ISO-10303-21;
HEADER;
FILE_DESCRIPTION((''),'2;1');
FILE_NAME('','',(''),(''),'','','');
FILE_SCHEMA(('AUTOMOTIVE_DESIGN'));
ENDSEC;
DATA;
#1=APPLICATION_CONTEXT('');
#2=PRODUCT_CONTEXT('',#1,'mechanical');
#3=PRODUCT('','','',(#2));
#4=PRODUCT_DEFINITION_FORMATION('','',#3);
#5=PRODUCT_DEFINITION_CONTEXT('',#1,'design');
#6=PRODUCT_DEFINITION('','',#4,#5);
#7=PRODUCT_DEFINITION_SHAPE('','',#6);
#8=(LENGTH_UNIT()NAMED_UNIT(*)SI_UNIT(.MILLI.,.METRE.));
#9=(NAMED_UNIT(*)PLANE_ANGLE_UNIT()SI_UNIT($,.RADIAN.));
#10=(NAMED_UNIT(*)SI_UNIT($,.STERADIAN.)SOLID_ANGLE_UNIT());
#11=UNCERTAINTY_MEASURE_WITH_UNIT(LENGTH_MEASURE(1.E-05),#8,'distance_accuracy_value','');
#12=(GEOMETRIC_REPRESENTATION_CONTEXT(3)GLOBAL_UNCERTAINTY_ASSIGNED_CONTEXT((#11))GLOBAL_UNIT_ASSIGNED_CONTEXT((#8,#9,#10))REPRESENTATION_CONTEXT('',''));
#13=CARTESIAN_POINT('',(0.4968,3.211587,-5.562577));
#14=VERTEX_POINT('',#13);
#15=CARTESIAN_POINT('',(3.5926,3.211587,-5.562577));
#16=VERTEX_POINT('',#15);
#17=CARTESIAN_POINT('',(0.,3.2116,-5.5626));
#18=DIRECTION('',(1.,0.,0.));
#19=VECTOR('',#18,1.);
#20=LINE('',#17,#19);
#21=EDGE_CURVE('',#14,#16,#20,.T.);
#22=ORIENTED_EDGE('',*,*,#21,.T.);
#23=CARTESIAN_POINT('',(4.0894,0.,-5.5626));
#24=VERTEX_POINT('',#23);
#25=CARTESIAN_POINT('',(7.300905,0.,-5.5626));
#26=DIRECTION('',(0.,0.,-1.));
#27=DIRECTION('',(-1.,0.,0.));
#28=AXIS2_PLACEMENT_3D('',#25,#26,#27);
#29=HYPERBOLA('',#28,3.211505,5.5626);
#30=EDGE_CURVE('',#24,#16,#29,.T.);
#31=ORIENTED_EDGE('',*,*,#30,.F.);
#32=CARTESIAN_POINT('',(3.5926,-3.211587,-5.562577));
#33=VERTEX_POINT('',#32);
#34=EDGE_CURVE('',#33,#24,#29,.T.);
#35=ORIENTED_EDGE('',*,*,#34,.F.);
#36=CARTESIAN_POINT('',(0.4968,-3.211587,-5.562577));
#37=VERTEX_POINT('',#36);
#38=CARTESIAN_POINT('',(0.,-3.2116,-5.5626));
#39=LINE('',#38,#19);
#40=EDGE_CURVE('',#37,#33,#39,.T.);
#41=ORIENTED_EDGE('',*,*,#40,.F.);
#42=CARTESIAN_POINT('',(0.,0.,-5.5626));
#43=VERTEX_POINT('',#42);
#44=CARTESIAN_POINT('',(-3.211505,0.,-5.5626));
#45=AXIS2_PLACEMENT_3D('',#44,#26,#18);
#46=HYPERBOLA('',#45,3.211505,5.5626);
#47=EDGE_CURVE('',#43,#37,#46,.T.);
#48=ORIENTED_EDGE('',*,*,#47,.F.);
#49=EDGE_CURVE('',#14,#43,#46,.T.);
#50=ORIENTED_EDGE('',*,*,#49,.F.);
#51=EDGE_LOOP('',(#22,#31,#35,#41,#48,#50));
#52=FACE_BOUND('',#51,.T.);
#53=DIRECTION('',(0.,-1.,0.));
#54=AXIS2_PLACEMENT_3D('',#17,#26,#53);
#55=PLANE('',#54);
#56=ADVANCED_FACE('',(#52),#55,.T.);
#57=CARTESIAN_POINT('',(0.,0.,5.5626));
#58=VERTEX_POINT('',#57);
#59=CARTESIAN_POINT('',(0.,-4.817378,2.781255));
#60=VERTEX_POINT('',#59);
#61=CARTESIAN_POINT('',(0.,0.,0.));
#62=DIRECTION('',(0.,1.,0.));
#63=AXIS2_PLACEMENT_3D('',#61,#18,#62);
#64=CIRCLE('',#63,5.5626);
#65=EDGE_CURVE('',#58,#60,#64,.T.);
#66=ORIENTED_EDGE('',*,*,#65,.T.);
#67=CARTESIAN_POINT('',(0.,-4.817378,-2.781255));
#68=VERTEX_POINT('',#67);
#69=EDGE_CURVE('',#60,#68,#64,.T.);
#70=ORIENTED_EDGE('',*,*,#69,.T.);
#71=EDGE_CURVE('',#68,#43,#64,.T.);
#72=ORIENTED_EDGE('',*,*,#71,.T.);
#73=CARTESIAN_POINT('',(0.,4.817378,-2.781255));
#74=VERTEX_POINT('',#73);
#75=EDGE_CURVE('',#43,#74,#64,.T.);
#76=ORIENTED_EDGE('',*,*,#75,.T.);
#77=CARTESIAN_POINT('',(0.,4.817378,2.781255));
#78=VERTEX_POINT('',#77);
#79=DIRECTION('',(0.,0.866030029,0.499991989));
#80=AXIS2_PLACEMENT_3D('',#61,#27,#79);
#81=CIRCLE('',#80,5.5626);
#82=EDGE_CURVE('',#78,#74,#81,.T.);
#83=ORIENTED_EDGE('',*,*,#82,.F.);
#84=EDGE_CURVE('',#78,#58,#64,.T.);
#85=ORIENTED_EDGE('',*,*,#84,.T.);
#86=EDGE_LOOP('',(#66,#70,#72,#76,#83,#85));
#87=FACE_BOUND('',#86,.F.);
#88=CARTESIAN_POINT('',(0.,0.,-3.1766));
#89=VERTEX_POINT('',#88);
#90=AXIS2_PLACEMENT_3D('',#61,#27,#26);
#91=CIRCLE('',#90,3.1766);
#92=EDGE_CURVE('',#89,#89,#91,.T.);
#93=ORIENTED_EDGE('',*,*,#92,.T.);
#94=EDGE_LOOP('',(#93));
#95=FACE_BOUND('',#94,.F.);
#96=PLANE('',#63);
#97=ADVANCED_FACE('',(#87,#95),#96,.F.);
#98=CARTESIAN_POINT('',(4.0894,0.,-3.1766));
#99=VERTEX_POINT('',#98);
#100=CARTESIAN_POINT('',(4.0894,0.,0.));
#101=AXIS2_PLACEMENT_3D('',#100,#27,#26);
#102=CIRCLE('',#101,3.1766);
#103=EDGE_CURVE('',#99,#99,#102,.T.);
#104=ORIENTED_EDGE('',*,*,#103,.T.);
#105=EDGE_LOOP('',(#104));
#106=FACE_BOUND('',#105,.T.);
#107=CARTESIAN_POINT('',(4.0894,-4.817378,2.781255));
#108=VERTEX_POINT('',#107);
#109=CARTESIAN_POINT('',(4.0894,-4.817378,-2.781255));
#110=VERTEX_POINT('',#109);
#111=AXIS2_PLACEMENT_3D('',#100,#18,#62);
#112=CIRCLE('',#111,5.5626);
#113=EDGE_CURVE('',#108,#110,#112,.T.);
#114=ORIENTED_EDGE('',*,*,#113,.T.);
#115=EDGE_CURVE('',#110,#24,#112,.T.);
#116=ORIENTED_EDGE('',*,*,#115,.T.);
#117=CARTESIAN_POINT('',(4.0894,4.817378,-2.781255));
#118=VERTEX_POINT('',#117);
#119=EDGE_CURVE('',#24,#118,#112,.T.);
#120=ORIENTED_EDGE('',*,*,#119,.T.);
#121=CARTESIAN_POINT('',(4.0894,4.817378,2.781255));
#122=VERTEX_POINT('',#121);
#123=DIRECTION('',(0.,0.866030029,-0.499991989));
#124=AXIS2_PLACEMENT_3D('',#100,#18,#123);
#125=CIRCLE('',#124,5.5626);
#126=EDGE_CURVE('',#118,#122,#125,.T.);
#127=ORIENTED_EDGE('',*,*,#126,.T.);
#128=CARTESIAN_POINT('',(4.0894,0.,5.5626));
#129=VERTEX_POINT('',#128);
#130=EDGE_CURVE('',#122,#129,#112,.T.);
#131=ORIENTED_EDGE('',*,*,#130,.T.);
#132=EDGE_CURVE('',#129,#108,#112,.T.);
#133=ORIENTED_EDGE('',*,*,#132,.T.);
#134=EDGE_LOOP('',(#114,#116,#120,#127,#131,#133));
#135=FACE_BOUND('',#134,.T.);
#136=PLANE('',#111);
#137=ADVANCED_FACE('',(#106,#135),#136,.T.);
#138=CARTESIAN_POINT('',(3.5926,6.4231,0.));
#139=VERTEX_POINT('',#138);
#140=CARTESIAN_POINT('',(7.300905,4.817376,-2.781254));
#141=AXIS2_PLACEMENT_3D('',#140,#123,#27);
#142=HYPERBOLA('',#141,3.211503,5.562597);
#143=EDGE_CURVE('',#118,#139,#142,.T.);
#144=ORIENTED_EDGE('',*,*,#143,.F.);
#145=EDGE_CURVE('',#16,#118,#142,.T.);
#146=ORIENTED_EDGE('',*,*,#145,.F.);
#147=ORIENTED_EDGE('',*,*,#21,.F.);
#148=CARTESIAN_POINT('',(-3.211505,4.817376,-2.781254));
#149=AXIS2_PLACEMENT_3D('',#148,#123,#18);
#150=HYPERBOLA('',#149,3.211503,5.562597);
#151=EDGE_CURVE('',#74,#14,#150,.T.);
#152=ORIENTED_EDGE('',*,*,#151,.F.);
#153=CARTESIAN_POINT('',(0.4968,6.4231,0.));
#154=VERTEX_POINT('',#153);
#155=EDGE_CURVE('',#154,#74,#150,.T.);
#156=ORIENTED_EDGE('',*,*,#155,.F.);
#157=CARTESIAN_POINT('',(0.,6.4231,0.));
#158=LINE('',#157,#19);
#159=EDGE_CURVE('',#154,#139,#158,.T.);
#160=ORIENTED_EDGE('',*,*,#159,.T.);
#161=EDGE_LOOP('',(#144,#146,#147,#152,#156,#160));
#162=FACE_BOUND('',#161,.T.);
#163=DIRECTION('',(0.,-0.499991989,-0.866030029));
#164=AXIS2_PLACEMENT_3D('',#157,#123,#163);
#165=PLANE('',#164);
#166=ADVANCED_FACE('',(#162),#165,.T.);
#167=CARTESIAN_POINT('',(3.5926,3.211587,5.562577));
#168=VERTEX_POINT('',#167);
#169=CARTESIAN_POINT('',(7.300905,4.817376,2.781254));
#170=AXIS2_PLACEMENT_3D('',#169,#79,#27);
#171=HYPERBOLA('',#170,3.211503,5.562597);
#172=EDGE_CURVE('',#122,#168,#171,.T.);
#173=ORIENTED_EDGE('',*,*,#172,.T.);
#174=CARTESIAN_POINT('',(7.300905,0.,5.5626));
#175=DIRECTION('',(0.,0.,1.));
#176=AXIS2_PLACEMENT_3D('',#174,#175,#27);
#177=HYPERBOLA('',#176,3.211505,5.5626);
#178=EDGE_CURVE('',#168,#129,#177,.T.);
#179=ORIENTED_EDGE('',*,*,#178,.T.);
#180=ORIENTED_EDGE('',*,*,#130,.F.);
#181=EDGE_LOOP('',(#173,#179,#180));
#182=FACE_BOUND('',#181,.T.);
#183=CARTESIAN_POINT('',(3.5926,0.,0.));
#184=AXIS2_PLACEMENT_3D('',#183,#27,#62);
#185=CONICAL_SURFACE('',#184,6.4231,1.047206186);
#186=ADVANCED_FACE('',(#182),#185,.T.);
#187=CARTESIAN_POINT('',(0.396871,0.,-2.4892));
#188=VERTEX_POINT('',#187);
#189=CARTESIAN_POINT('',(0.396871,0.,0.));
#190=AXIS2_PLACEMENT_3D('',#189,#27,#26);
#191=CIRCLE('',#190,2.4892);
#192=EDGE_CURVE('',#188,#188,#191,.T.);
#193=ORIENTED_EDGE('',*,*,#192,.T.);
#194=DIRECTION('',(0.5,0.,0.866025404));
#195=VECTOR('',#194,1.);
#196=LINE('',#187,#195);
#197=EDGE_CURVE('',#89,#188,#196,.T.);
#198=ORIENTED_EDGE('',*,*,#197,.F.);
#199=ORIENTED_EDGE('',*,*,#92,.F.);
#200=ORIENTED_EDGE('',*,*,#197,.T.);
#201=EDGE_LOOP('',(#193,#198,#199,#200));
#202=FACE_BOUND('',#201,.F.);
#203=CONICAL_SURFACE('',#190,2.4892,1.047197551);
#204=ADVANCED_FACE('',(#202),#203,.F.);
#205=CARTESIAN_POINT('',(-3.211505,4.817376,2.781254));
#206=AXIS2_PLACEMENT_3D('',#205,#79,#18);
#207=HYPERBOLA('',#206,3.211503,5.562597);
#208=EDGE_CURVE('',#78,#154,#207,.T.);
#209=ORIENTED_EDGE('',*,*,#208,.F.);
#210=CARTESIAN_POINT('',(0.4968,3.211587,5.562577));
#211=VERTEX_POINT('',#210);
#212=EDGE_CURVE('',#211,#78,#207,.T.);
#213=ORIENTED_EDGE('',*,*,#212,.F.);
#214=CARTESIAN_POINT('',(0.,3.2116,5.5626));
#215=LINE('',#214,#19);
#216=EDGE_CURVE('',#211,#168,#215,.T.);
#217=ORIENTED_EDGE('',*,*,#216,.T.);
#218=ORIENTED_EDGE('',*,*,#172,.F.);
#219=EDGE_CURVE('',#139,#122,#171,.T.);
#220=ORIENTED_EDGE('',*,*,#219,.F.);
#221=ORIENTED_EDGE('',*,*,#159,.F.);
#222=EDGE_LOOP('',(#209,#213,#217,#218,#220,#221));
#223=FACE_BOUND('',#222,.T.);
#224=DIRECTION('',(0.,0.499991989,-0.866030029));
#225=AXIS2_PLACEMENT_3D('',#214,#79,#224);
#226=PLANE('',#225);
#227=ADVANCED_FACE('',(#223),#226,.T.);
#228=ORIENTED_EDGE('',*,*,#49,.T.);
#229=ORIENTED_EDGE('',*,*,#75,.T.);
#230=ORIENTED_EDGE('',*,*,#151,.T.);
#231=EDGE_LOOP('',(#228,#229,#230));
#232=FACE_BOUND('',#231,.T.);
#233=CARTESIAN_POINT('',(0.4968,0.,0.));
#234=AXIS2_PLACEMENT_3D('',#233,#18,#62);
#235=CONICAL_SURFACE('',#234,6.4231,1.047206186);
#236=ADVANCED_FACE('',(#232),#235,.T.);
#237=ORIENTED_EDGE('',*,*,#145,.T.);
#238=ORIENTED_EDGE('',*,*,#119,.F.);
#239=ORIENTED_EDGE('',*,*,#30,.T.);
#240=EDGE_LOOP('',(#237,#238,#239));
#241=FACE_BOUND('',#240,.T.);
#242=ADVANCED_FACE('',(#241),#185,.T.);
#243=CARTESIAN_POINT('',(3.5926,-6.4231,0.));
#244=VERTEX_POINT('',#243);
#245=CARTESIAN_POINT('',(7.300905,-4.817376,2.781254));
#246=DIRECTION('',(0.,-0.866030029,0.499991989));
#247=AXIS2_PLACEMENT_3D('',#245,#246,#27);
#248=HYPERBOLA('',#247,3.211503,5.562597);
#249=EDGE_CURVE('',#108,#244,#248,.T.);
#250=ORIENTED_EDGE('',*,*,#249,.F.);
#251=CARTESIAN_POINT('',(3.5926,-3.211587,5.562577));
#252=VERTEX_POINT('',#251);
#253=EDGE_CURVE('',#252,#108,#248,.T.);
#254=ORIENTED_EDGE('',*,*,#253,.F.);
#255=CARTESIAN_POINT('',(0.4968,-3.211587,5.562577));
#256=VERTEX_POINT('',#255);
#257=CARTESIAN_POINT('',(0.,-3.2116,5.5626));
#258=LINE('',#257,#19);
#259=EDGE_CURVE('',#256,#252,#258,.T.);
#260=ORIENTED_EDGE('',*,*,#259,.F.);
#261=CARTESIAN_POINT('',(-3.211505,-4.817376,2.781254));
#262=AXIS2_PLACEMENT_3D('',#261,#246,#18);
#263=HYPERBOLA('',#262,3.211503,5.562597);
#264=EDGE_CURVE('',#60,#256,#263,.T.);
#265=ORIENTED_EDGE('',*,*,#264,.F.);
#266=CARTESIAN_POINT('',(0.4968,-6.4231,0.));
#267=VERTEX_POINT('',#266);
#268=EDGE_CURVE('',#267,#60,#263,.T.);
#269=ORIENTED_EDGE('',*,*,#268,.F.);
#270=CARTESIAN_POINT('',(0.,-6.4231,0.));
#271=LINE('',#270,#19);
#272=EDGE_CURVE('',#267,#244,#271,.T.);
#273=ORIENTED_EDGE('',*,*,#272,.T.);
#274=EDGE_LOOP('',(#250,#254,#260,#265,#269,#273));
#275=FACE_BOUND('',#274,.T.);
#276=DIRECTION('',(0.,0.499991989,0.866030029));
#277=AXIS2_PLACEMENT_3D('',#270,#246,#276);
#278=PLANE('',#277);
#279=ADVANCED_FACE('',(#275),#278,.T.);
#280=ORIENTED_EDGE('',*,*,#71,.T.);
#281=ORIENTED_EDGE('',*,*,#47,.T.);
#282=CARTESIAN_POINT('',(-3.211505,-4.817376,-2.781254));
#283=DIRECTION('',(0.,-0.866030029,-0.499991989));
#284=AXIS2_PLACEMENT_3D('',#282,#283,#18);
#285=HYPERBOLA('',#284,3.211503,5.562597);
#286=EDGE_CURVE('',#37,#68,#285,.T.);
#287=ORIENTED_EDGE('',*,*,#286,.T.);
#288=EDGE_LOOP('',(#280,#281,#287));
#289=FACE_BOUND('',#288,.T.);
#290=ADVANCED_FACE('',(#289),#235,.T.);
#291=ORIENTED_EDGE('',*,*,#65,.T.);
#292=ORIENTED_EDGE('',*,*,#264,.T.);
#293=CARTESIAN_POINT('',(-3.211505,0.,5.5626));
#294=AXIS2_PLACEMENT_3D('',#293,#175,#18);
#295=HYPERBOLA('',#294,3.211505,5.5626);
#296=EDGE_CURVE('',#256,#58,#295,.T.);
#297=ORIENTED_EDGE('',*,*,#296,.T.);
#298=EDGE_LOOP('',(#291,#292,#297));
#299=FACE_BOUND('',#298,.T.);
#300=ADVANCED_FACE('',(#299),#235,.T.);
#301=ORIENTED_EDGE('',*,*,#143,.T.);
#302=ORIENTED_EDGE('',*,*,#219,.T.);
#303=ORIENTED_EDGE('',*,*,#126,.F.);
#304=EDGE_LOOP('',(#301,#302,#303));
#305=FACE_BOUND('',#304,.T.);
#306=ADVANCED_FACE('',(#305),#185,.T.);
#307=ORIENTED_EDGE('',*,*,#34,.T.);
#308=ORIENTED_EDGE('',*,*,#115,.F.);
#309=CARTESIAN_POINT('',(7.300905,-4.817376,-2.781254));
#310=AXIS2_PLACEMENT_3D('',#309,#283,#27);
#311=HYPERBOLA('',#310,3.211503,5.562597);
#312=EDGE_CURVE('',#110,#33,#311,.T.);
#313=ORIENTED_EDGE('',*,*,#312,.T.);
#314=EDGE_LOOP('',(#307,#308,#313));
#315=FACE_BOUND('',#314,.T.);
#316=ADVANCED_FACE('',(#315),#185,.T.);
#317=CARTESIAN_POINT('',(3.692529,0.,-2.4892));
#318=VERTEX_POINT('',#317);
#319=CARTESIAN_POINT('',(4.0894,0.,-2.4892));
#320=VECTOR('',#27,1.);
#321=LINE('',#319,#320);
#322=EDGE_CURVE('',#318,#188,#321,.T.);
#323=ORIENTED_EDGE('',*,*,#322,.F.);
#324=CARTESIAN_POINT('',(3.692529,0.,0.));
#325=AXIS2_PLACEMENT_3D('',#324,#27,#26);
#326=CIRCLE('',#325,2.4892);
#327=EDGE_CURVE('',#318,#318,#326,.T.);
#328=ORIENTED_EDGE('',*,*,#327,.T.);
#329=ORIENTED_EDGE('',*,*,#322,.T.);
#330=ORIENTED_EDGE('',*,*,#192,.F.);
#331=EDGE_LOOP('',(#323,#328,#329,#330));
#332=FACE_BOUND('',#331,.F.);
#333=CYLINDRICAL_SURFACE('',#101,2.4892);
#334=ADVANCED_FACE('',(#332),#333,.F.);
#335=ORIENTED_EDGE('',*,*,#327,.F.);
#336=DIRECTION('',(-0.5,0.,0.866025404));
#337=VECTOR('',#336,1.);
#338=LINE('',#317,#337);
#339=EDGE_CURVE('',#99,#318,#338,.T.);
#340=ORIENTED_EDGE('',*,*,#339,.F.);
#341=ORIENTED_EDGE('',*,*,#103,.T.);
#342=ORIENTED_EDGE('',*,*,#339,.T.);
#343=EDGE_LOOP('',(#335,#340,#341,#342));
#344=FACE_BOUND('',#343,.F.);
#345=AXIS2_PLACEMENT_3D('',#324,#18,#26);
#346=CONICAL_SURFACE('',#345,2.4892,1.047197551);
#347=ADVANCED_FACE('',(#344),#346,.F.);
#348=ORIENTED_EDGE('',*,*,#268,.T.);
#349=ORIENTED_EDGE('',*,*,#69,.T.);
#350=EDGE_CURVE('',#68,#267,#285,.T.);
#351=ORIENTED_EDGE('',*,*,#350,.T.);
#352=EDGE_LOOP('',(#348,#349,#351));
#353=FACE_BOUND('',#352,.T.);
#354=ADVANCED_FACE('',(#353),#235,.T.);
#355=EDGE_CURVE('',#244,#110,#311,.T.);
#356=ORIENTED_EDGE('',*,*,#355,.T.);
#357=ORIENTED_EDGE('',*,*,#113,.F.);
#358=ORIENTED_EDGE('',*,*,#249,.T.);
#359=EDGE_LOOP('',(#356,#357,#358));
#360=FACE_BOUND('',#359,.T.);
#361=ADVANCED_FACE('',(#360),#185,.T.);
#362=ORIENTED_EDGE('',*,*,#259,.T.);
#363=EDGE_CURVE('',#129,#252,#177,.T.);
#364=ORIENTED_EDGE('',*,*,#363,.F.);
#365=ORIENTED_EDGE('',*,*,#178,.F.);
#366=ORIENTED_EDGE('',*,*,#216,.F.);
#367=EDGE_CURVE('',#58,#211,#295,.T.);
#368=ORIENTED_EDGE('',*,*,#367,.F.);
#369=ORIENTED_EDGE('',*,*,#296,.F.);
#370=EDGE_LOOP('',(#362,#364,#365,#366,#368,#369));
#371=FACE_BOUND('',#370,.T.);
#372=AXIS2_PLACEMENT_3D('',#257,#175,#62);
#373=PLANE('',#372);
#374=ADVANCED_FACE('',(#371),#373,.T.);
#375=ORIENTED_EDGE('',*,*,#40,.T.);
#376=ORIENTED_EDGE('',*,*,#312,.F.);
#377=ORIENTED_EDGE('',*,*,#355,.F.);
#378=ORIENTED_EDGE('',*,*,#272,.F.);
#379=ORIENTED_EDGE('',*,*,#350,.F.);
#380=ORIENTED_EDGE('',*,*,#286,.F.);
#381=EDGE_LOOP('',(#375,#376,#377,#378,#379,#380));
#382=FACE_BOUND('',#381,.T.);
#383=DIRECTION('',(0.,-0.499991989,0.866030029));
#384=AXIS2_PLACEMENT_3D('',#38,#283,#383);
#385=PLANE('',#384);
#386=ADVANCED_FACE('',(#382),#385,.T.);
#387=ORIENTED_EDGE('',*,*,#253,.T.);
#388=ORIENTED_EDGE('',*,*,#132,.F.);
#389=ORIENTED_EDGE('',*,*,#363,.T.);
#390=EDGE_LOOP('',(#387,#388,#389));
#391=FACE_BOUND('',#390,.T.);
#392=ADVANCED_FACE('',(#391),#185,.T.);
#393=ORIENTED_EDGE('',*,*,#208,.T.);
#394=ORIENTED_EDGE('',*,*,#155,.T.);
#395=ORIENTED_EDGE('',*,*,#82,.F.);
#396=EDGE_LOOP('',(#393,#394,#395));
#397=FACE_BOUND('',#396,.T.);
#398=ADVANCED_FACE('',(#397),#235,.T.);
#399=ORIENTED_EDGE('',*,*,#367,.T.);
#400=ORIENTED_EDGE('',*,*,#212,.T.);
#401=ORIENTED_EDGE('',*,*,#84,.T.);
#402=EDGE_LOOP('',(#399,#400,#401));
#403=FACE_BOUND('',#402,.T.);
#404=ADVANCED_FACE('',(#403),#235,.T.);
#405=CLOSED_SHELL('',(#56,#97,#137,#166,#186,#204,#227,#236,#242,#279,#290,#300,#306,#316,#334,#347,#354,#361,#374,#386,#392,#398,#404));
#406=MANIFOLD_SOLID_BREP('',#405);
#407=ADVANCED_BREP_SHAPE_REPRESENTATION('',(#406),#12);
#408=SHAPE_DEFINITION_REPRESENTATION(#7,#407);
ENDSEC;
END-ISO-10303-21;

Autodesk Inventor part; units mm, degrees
ref_plane "YZ Plane" through (0, 0, 0) normal (1, 0, 0) x (0, 1, 0)
ref_plane "XZ Plane" through (0, 0, 0) normal (0, 1, 0) x (-1, 0, 0)
sketch "Sketch1" plane through (0, 0, 0) normal (1, 0, 0) x (0, 1, 0)
  line L0 (-6.4231, 0) -> (-3.2116, 5.5626)
  line L1 (-3.2116, 5.5626) -> (3.2116, 5.5626)
  line L2 (3.2116, 5.5626) -> (6.4231, 0)
  line L3 (6.4231, 0) -> (3.2116, -5.5626)
  line L4 (3.2116, -5.5626) -> (-3.2116, -5.5626)
  line L5 (-3.2116, -5.5626) -> (-6.4231, 0)
  point P0 (0, 0)
  point P1 (0, 0)
  dimension "d0" = 12.8463
extrude "Body" add sketch "Sketch1" along normal blind 4.0894
sketch "Sketch2" plane through (0, 0, 0) normal (0, 0, 1) x (1, 0, 0)
  line L0 (0, 3.2116) -> (0, 6.4231) projected
  line L1 (0, 6.4231) -> (4.0894, 6.4231) projected
  line L2 (4.0894, 3.2116) -> (4.0894, 6.4231) projected
  line L3 (-0.8179, 0) -> (4.9073, 0) projected
  line L4 (0.4968, 6.4231) -> (0, 5.5626)
  line L5 (3.5926, 6.4231) -> (4.0894, 5.5626)
  dimension "d3" = 30
  dimension "d4" = 30
  dimension "d5" = 11.1252
  dimension "d6" = 11.1252
revolve "Chamfer1" cut sketch "Sketch2" angle 360 about axis through (-10, 0, 0) along (1, 0, 0)
sketch "Sketch3" plane through (4.0894, 0, 0) normal (1, 0, 0) x (0, 0, -1)
  arc A0 (-2.7813, -4.8174) -> (2.7813, -4.8174) centre (0, 0) ccw projected
hole "Thread" at (4.0894, 0, 0) direction (-1, 0, 0) diameter 4.9784 end through all thread size "1/4-20 UNC" class "2B" standard "ANSI Unified Screw Threads"
chamfer "Chamfer2" distance 0.6874 angle 30 1 edges at (4.0894, 0, 2.4892) measured on face at (4.0894, -4.5118, -0.1)
chamfer "Chamfer3" distance 0.6874 angle 30 1 edges at (0, 0, 2.4892) measured on face at (0, -4.5118, -0.1)
ref_plane "Work Plane1" through (-13.3897, 0, 0) normal (0, -0.8660254, -0.5) x (1, 0, 0)
equation "\"d0\" = 1.1547 * SW"
equation "\"d1\" = KOH"
equation "\"d3\" = ANG1"
equation "\"d4\" = ANG2"
equation "\"d5\" = SW0"
equation "\"d6\" = SW01"
equation "\"d8\" = -0.5 * GD1 + 0.5 * NND"
equation "\"d40\" = -0.5 * GD1 + 0.5 * NND"
equation "\"d10\" = -0.5 * GD1 + 0.5 * NND"
equation "\"d41\" = -0.5 * GD1 + 0.5 * NND"
equation "\"ANG1\" = 30deg"
equation "\"ANG2\" = 30deg"
equation "\"NND\" = 6.35"
equation "\"KOH\" = 4.0894"
equation "\"SW\" = 11.1252"
equation "\"SW0\" = SW"
equation "\"SW01\" = SW"
equation "\"THREADDIA\" = 6.35"
equation "\"TOA\" = 30deg"
equation "\"E0\" = 1.155 * SW"
equation "\"GD1\" = 4.975185"
properties part number "ANSI B18.6.3 - 1/4 - 20" material "Steel, Mild"
